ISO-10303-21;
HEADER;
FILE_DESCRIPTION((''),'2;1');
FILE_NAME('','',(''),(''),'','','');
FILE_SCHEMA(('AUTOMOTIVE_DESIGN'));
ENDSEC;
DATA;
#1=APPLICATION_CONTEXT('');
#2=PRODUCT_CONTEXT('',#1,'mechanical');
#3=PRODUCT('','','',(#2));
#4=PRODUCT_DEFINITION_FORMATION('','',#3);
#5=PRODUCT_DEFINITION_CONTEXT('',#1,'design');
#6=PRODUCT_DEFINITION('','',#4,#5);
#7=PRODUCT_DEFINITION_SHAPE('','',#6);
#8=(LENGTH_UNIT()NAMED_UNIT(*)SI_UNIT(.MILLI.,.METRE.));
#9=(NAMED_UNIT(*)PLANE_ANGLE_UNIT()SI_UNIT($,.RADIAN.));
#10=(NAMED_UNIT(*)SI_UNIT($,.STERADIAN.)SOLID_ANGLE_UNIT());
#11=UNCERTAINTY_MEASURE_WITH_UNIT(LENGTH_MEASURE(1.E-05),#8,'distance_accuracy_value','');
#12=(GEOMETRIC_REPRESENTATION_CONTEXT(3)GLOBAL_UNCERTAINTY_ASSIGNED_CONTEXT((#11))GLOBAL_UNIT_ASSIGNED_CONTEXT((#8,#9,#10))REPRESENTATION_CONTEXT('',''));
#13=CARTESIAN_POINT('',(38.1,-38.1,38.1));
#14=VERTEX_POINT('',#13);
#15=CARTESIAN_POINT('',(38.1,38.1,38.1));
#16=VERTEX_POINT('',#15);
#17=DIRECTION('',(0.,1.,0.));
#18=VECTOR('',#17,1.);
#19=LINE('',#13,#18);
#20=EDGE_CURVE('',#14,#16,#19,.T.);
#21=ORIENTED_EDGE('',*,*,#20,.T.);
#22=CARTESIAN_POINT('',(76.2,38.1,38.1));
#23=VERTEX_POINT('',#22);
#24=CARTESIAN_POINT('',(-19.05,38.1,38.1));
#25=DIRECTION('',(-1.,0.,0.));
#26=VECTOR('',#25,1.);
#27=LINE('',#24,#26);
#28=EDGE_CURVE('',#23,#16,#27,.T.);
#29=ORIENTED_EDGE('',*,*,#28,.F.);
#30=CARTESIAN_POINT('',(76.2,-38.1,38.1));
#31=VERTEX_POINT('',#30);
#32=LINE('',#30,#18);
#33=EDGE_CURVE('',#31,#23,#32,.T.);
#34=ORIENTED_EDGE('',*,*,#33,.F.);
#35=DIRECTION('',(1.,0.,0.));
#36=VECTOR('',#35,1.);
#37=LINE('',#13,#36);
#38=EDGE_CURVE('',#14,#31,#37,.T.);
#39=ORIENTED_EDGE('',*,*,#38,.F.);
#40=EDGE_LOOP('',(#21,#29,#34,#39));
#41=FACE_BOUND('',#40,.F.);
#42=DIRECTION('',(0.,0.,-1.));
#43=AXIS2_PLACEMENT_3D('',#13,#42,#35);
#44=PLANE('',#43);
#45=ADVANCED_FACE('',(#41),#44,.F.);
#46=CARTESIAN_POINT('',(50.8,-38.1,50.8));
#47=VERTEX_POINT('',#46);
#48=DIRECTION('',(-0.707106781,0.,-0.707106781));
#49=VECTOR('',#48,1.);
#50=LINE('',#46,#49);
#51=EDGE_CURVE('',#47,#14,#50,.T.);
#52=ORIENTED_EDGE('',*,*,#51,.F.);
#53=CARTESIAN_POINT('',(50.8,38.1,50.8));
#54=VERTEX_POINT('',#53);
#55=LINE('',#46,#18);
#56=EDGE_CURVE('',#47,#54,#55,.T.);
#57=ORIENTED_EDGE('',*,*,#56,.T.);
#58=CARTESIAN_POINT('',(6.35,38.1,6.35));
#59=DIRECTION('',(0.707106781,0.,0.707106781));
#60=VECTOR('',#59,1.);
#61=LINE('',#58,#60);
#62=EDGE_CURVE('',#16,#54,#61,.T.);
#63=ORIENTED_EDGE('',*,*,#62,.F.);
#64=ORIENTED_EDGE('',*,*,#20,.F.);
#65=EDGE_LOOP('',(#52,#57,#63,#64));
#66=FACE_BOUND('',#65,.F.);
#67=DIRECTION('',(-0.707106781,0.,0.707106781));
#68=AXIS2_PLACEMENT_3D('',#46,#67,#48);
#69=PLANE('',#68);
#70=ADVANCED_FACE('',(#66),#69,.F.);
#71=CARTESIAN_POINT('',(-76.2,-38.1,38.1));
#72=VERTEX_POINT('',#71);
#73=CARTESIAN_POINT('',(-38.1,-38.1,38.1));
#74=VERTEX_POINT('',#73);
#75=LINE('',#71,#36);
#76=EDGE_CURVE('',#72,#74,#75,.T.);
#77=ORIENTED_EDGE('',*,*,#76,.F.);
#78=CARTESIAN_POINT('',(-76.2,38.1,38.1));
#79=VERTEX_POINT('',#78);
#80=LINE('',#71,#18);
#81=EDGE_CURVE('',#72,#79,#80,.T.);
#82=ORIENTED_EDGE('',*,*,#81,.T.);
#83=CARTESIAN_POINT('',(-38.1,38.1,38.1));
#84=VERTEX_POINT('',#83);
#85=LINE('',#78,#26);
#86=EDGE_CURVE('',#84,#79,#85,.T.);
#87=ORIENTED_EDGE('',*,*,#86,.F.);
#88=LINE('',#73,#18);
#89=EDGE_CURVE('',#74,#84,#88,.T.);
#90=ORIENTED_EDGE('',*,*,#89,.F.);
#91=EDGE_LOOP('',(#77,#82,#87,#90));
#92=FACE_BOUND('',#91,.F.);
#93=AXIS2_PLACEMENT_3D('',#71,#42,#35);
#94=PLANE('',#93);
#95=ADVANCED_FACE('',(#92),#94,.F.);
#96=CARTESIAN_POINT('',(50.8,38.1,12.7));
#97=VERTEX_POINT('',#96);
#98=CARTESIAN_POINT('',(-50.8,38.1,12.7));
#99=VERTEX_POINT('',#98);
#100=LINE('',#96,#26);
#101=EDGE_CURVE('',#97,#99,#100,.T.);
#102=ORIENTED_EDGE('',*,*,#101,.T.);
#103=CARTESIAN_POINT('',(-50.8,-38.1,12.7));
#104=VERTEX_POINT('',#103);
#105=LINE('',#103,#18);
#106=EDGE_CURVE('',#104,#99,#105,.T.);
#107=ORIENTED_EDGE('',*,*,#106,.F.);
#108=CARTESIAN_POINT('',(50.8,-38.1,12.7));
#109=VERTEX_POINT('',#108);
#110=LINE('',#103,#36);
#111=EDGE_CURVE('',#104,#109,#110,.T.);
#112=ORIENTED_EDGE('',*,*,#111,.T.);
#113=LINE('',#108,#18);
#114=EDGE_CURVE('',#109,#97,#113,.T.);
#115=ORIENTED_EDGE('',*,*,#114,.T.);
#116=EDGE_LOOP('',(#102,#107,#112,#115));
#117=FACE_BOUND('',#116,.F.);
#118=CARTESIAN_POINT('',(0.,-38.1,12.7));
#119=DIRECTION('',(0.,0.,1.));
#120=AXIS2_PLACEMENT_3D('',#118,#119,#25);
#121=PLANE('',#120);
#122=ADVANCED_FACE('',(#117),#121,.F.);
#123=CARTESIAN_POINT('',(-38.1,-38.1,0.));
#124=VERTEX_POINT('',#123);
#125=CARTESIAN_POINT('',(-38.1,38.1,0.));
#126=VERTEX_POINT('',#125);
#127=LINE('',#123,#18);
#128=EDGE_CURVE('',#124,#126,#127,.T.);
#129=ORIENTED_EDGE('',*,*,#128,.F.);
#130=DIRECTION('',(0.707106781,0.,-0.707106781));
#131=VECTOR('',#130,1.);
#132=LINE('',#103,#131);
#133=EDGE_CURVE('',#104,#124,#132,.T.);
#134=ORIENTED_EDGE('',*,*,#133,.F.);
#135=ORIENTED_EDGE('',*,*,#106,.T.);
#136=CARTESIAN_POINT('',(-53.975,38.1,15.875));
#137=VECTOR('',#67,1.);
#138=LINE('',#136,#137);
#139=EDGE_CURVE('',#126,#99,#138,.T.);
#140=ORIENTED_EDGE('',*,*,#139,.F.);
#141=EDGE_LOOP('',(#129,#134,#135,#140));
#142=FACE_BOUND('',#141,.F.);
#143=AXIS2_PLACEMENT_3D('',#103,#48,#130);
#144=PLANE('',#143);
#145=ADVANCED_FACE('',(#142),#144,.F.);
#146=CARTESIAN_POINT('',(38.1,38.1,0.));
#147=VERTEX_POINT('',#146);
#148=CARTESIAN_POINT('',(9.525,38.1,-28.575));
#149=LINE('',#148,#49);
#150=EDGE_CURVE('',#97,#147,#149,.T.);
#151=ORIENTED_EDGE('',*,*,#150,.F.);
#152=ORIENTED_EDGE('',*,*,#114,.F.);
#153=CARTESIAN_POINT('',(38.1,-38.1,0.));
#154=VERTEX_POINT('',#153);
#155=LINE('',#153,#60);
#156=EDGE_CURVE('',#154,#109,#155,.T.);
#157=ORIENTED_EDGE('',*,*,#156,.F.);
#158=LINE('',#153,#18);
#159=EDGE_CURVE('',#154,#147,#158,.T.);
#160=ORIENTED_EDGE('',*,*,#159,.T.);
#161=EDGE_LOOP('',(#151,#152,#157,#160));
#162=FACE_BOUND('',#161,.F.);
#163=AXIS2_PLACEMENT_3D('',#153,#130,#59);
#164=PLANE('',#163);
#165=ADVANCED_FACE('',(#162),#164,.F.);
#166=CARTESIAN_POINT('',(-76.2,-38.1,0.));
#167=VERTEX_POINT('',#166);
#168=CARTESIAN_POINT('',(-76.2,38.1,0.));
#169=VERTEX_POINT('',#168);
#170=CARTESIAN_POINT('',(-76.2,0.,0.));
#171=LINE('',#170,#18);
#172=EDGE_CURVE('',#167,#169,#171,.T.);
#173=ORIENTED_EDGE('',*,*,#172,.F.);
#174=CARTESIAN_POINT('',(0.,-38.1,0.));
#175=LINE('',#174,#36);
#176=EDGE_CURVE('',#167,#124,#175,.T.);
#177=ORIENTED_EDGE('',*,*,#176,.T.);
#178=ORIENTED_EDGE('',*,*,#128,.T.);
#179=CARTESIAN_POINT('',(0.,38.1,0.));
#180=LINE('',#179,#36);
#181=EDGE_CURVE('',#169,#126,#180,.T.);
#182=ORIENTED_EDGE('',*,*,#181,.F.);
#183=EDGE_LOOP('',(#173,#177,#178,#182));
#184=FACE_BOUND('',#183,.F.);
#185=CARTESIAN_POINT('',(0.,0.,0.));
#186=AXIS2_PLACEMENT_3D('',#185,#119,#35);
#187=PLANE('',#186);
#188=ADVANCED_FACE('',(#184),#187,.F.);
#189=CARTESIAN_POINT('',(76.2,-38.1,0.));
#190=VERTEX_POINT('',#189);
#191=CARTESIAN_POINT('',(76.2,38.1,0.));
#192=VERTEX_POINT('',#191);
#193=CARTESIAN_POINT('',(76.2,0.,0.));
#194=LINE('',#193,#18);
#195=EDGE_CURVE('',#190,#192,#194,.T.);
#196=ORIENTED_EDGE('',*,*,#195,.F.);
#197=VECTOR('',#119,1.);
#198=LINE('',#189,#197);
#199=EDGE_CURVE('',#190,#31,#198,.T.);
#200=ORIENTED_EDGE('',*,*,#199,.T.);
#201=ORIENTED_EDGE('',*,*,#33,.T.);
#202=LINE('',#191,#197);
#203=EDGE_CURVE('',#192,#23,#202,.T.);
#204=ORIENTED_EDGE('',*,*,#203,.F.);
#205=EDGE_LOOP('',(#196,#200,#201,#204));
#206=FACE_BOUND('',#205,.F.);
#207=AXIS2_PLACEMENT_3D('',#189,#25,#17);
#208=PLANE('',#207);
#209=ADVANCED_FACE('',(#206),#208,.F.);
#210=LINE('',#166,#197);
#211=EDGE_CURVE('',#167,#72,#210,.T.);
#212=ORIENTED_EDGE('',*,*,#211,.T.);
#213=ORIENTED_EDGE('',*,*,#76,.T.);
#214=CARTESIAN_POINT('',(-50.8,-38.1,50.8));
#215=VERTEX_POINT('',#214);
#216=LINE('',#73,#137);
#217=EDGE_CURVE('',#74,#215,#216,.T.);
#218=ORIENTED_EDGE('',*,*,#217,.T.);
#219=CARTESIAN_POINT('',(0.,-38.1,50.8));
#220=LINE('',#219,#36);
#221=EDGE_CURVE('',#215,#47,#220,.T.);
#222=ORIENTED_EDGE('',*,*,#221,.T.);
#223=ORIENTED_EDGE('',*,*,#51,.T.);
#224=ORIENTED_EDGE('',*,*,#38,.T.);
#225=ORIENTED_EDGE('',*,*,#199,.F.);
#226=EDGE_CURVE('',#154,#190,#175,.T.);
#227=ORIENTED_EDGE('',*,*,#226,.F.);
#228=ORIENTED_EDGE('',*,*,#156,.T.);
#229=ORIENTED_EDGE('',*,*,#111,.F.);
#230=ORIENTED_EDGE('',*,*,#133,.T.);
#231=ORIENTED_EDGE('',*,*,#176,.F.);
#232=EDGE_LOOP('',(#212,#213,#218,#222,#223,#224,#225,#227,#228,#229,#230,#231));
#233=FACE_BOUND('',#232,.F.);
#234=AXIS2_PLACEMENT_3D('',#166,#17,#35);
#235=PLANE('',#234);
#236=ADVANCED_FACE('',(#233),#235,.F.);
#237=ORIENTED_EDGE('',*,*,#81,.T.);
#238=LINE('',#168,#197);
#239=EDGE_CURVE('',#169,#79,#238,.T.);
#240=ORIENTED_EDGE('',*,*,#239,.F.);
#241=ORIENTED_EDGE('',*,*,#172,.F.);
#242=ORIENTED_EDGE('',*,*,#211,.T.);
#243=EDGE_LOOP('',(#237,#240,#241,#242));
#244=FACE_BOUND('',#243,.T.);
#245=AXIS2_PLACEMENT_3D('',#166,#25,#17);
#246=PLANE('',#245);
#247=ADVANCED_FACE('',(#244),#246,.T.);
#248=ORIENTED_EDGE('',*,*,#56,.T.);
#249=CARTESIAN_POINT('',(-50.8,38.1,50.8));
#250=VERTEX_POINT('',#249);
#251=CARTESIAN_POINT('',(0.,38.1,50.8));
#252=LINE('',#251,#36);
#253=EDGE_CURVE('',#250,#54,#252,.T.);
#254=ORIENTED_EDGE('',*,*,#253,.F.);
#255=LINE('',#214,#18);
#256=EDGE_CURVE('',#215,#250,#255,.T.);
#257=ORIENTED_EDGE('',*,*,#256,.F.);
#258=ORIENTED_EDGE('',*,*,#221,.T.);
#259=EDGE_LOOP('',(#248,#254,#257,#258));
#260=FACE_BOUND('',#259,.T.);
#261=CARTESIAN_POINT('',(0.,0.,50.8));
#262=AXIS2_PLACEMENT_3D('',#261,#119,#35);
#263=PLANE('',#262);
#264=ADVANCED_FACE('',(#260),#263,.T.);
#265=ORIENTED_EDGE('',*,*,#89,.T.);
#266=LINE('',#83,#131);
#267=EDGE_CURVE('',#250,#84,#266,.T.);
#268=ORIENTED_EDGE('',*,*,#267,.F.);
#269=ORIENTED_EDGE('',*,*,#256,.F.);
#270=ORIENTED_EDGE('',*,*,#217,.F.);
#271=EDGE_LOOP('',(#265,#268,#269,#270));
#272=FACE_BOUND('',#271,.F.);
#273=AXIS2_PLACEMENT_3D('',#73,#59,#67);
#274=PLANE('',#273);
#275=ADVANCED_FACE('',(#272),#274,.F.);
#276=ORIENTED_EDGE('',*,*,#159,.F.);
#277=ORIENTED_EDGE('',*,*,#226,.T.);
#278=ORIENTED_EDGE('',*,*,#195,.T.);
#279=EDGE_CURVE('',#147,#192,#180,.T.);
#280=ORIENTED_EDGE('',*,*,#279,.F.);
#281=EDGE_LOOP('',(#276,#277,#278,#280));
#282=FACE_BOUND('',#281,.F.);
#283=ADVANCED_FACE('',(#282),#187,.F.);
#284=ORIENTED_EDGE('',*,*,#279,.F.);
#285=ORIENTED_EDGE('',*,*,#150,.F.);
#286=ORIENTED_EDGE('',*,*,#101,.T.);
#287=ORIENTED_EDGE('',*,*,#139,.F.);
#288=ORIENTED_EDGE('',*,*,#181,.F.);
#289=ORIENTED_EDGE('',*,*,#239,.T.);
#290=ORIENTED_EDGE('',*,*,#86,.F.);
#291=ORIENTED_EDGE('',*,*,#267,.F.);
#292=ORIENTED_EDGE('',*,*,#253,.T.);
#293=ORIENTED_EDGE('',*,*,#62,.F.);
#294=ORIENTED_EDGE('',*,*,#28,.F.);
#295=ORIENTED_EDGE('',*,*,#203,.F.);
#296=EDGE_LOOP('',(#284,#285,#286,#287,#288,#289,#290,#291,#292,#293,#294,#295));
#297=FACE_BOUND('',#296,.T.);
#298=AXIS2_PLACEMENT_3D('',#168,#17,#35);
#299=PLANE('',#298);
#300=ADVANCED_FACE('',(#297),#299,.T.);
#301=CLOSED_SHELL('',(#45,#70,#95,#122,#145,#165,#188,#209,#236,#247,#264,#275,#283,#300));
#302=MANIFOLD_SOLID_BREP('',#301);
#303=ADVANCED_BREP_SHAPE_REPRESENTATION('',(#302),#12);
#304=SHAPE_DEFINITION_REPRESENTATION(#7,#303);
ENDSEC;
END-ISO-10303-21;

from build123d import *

# Parameters (mm, degrees)
F0_W     = 152.4
F0_H     = 76.2
F1_DEPTH = 50.8
F3_DEPTH = 76.201
F4_DEPTH = 76.201
F6_DEPTH = 76.201
F8_DEPTH = 76.201


# Not quite as in the source:
# - a feature names something its author has since deleted; it is built from what else it names


with BuildPart() as f1:
    # F0 (on Top) → F1 (new body)
    with BuildSketch(Plane.XY):
        Rectangle(F0_W, F0_H)
    extrude(amount=F1_DEPTH)

    # F2 (on face) → F3 (cut, through all)
    with BuildSketch(Plane.XZ.offset(38.1)):
        Polygon((-38.1, 0), (0, 0), (0, 12.7), (-50.8, 12.7), align=None)
    extrude(amount=-F3_DEPTH, mode=Mode.SUBTRACT)

    # F2 (on face) → F4 (cut, through all)
    with BuildSketch(Plane.XZ.offset(38.1)):
        Polygon((0, 12.7), (0, 0), (38.1, 0), (50.8, 12.7), align=None)
    extrude(amount=-F4_DEPTH, mode=Mode.SUBTRACT)

    # F5 (on face) → F6 (cut, through all)
    with BuildSketch(Plane.XZ.offset(38.1)):
        Polygon((-76.2, 38.1), (-38.1, 38.1), (-50.8, 50.8), (-76.2, 50.8), align=None)
    extrude(amount=-F6_DEPTH, mode=Mode.SUBTRACT)

    # F7 (on face) → F8 (cut, through all)
    with BuildSketch(Plane.XZ.offset(38.1)):
        Polygon((50.8, 50.8), (38.1, 38.1), (76.2, 38.1), (76.2, 50.8), align=None)
    extrude(amount=-F8_DEPTH, mode=Mode.SUBTRACT)


solid = f1.part
